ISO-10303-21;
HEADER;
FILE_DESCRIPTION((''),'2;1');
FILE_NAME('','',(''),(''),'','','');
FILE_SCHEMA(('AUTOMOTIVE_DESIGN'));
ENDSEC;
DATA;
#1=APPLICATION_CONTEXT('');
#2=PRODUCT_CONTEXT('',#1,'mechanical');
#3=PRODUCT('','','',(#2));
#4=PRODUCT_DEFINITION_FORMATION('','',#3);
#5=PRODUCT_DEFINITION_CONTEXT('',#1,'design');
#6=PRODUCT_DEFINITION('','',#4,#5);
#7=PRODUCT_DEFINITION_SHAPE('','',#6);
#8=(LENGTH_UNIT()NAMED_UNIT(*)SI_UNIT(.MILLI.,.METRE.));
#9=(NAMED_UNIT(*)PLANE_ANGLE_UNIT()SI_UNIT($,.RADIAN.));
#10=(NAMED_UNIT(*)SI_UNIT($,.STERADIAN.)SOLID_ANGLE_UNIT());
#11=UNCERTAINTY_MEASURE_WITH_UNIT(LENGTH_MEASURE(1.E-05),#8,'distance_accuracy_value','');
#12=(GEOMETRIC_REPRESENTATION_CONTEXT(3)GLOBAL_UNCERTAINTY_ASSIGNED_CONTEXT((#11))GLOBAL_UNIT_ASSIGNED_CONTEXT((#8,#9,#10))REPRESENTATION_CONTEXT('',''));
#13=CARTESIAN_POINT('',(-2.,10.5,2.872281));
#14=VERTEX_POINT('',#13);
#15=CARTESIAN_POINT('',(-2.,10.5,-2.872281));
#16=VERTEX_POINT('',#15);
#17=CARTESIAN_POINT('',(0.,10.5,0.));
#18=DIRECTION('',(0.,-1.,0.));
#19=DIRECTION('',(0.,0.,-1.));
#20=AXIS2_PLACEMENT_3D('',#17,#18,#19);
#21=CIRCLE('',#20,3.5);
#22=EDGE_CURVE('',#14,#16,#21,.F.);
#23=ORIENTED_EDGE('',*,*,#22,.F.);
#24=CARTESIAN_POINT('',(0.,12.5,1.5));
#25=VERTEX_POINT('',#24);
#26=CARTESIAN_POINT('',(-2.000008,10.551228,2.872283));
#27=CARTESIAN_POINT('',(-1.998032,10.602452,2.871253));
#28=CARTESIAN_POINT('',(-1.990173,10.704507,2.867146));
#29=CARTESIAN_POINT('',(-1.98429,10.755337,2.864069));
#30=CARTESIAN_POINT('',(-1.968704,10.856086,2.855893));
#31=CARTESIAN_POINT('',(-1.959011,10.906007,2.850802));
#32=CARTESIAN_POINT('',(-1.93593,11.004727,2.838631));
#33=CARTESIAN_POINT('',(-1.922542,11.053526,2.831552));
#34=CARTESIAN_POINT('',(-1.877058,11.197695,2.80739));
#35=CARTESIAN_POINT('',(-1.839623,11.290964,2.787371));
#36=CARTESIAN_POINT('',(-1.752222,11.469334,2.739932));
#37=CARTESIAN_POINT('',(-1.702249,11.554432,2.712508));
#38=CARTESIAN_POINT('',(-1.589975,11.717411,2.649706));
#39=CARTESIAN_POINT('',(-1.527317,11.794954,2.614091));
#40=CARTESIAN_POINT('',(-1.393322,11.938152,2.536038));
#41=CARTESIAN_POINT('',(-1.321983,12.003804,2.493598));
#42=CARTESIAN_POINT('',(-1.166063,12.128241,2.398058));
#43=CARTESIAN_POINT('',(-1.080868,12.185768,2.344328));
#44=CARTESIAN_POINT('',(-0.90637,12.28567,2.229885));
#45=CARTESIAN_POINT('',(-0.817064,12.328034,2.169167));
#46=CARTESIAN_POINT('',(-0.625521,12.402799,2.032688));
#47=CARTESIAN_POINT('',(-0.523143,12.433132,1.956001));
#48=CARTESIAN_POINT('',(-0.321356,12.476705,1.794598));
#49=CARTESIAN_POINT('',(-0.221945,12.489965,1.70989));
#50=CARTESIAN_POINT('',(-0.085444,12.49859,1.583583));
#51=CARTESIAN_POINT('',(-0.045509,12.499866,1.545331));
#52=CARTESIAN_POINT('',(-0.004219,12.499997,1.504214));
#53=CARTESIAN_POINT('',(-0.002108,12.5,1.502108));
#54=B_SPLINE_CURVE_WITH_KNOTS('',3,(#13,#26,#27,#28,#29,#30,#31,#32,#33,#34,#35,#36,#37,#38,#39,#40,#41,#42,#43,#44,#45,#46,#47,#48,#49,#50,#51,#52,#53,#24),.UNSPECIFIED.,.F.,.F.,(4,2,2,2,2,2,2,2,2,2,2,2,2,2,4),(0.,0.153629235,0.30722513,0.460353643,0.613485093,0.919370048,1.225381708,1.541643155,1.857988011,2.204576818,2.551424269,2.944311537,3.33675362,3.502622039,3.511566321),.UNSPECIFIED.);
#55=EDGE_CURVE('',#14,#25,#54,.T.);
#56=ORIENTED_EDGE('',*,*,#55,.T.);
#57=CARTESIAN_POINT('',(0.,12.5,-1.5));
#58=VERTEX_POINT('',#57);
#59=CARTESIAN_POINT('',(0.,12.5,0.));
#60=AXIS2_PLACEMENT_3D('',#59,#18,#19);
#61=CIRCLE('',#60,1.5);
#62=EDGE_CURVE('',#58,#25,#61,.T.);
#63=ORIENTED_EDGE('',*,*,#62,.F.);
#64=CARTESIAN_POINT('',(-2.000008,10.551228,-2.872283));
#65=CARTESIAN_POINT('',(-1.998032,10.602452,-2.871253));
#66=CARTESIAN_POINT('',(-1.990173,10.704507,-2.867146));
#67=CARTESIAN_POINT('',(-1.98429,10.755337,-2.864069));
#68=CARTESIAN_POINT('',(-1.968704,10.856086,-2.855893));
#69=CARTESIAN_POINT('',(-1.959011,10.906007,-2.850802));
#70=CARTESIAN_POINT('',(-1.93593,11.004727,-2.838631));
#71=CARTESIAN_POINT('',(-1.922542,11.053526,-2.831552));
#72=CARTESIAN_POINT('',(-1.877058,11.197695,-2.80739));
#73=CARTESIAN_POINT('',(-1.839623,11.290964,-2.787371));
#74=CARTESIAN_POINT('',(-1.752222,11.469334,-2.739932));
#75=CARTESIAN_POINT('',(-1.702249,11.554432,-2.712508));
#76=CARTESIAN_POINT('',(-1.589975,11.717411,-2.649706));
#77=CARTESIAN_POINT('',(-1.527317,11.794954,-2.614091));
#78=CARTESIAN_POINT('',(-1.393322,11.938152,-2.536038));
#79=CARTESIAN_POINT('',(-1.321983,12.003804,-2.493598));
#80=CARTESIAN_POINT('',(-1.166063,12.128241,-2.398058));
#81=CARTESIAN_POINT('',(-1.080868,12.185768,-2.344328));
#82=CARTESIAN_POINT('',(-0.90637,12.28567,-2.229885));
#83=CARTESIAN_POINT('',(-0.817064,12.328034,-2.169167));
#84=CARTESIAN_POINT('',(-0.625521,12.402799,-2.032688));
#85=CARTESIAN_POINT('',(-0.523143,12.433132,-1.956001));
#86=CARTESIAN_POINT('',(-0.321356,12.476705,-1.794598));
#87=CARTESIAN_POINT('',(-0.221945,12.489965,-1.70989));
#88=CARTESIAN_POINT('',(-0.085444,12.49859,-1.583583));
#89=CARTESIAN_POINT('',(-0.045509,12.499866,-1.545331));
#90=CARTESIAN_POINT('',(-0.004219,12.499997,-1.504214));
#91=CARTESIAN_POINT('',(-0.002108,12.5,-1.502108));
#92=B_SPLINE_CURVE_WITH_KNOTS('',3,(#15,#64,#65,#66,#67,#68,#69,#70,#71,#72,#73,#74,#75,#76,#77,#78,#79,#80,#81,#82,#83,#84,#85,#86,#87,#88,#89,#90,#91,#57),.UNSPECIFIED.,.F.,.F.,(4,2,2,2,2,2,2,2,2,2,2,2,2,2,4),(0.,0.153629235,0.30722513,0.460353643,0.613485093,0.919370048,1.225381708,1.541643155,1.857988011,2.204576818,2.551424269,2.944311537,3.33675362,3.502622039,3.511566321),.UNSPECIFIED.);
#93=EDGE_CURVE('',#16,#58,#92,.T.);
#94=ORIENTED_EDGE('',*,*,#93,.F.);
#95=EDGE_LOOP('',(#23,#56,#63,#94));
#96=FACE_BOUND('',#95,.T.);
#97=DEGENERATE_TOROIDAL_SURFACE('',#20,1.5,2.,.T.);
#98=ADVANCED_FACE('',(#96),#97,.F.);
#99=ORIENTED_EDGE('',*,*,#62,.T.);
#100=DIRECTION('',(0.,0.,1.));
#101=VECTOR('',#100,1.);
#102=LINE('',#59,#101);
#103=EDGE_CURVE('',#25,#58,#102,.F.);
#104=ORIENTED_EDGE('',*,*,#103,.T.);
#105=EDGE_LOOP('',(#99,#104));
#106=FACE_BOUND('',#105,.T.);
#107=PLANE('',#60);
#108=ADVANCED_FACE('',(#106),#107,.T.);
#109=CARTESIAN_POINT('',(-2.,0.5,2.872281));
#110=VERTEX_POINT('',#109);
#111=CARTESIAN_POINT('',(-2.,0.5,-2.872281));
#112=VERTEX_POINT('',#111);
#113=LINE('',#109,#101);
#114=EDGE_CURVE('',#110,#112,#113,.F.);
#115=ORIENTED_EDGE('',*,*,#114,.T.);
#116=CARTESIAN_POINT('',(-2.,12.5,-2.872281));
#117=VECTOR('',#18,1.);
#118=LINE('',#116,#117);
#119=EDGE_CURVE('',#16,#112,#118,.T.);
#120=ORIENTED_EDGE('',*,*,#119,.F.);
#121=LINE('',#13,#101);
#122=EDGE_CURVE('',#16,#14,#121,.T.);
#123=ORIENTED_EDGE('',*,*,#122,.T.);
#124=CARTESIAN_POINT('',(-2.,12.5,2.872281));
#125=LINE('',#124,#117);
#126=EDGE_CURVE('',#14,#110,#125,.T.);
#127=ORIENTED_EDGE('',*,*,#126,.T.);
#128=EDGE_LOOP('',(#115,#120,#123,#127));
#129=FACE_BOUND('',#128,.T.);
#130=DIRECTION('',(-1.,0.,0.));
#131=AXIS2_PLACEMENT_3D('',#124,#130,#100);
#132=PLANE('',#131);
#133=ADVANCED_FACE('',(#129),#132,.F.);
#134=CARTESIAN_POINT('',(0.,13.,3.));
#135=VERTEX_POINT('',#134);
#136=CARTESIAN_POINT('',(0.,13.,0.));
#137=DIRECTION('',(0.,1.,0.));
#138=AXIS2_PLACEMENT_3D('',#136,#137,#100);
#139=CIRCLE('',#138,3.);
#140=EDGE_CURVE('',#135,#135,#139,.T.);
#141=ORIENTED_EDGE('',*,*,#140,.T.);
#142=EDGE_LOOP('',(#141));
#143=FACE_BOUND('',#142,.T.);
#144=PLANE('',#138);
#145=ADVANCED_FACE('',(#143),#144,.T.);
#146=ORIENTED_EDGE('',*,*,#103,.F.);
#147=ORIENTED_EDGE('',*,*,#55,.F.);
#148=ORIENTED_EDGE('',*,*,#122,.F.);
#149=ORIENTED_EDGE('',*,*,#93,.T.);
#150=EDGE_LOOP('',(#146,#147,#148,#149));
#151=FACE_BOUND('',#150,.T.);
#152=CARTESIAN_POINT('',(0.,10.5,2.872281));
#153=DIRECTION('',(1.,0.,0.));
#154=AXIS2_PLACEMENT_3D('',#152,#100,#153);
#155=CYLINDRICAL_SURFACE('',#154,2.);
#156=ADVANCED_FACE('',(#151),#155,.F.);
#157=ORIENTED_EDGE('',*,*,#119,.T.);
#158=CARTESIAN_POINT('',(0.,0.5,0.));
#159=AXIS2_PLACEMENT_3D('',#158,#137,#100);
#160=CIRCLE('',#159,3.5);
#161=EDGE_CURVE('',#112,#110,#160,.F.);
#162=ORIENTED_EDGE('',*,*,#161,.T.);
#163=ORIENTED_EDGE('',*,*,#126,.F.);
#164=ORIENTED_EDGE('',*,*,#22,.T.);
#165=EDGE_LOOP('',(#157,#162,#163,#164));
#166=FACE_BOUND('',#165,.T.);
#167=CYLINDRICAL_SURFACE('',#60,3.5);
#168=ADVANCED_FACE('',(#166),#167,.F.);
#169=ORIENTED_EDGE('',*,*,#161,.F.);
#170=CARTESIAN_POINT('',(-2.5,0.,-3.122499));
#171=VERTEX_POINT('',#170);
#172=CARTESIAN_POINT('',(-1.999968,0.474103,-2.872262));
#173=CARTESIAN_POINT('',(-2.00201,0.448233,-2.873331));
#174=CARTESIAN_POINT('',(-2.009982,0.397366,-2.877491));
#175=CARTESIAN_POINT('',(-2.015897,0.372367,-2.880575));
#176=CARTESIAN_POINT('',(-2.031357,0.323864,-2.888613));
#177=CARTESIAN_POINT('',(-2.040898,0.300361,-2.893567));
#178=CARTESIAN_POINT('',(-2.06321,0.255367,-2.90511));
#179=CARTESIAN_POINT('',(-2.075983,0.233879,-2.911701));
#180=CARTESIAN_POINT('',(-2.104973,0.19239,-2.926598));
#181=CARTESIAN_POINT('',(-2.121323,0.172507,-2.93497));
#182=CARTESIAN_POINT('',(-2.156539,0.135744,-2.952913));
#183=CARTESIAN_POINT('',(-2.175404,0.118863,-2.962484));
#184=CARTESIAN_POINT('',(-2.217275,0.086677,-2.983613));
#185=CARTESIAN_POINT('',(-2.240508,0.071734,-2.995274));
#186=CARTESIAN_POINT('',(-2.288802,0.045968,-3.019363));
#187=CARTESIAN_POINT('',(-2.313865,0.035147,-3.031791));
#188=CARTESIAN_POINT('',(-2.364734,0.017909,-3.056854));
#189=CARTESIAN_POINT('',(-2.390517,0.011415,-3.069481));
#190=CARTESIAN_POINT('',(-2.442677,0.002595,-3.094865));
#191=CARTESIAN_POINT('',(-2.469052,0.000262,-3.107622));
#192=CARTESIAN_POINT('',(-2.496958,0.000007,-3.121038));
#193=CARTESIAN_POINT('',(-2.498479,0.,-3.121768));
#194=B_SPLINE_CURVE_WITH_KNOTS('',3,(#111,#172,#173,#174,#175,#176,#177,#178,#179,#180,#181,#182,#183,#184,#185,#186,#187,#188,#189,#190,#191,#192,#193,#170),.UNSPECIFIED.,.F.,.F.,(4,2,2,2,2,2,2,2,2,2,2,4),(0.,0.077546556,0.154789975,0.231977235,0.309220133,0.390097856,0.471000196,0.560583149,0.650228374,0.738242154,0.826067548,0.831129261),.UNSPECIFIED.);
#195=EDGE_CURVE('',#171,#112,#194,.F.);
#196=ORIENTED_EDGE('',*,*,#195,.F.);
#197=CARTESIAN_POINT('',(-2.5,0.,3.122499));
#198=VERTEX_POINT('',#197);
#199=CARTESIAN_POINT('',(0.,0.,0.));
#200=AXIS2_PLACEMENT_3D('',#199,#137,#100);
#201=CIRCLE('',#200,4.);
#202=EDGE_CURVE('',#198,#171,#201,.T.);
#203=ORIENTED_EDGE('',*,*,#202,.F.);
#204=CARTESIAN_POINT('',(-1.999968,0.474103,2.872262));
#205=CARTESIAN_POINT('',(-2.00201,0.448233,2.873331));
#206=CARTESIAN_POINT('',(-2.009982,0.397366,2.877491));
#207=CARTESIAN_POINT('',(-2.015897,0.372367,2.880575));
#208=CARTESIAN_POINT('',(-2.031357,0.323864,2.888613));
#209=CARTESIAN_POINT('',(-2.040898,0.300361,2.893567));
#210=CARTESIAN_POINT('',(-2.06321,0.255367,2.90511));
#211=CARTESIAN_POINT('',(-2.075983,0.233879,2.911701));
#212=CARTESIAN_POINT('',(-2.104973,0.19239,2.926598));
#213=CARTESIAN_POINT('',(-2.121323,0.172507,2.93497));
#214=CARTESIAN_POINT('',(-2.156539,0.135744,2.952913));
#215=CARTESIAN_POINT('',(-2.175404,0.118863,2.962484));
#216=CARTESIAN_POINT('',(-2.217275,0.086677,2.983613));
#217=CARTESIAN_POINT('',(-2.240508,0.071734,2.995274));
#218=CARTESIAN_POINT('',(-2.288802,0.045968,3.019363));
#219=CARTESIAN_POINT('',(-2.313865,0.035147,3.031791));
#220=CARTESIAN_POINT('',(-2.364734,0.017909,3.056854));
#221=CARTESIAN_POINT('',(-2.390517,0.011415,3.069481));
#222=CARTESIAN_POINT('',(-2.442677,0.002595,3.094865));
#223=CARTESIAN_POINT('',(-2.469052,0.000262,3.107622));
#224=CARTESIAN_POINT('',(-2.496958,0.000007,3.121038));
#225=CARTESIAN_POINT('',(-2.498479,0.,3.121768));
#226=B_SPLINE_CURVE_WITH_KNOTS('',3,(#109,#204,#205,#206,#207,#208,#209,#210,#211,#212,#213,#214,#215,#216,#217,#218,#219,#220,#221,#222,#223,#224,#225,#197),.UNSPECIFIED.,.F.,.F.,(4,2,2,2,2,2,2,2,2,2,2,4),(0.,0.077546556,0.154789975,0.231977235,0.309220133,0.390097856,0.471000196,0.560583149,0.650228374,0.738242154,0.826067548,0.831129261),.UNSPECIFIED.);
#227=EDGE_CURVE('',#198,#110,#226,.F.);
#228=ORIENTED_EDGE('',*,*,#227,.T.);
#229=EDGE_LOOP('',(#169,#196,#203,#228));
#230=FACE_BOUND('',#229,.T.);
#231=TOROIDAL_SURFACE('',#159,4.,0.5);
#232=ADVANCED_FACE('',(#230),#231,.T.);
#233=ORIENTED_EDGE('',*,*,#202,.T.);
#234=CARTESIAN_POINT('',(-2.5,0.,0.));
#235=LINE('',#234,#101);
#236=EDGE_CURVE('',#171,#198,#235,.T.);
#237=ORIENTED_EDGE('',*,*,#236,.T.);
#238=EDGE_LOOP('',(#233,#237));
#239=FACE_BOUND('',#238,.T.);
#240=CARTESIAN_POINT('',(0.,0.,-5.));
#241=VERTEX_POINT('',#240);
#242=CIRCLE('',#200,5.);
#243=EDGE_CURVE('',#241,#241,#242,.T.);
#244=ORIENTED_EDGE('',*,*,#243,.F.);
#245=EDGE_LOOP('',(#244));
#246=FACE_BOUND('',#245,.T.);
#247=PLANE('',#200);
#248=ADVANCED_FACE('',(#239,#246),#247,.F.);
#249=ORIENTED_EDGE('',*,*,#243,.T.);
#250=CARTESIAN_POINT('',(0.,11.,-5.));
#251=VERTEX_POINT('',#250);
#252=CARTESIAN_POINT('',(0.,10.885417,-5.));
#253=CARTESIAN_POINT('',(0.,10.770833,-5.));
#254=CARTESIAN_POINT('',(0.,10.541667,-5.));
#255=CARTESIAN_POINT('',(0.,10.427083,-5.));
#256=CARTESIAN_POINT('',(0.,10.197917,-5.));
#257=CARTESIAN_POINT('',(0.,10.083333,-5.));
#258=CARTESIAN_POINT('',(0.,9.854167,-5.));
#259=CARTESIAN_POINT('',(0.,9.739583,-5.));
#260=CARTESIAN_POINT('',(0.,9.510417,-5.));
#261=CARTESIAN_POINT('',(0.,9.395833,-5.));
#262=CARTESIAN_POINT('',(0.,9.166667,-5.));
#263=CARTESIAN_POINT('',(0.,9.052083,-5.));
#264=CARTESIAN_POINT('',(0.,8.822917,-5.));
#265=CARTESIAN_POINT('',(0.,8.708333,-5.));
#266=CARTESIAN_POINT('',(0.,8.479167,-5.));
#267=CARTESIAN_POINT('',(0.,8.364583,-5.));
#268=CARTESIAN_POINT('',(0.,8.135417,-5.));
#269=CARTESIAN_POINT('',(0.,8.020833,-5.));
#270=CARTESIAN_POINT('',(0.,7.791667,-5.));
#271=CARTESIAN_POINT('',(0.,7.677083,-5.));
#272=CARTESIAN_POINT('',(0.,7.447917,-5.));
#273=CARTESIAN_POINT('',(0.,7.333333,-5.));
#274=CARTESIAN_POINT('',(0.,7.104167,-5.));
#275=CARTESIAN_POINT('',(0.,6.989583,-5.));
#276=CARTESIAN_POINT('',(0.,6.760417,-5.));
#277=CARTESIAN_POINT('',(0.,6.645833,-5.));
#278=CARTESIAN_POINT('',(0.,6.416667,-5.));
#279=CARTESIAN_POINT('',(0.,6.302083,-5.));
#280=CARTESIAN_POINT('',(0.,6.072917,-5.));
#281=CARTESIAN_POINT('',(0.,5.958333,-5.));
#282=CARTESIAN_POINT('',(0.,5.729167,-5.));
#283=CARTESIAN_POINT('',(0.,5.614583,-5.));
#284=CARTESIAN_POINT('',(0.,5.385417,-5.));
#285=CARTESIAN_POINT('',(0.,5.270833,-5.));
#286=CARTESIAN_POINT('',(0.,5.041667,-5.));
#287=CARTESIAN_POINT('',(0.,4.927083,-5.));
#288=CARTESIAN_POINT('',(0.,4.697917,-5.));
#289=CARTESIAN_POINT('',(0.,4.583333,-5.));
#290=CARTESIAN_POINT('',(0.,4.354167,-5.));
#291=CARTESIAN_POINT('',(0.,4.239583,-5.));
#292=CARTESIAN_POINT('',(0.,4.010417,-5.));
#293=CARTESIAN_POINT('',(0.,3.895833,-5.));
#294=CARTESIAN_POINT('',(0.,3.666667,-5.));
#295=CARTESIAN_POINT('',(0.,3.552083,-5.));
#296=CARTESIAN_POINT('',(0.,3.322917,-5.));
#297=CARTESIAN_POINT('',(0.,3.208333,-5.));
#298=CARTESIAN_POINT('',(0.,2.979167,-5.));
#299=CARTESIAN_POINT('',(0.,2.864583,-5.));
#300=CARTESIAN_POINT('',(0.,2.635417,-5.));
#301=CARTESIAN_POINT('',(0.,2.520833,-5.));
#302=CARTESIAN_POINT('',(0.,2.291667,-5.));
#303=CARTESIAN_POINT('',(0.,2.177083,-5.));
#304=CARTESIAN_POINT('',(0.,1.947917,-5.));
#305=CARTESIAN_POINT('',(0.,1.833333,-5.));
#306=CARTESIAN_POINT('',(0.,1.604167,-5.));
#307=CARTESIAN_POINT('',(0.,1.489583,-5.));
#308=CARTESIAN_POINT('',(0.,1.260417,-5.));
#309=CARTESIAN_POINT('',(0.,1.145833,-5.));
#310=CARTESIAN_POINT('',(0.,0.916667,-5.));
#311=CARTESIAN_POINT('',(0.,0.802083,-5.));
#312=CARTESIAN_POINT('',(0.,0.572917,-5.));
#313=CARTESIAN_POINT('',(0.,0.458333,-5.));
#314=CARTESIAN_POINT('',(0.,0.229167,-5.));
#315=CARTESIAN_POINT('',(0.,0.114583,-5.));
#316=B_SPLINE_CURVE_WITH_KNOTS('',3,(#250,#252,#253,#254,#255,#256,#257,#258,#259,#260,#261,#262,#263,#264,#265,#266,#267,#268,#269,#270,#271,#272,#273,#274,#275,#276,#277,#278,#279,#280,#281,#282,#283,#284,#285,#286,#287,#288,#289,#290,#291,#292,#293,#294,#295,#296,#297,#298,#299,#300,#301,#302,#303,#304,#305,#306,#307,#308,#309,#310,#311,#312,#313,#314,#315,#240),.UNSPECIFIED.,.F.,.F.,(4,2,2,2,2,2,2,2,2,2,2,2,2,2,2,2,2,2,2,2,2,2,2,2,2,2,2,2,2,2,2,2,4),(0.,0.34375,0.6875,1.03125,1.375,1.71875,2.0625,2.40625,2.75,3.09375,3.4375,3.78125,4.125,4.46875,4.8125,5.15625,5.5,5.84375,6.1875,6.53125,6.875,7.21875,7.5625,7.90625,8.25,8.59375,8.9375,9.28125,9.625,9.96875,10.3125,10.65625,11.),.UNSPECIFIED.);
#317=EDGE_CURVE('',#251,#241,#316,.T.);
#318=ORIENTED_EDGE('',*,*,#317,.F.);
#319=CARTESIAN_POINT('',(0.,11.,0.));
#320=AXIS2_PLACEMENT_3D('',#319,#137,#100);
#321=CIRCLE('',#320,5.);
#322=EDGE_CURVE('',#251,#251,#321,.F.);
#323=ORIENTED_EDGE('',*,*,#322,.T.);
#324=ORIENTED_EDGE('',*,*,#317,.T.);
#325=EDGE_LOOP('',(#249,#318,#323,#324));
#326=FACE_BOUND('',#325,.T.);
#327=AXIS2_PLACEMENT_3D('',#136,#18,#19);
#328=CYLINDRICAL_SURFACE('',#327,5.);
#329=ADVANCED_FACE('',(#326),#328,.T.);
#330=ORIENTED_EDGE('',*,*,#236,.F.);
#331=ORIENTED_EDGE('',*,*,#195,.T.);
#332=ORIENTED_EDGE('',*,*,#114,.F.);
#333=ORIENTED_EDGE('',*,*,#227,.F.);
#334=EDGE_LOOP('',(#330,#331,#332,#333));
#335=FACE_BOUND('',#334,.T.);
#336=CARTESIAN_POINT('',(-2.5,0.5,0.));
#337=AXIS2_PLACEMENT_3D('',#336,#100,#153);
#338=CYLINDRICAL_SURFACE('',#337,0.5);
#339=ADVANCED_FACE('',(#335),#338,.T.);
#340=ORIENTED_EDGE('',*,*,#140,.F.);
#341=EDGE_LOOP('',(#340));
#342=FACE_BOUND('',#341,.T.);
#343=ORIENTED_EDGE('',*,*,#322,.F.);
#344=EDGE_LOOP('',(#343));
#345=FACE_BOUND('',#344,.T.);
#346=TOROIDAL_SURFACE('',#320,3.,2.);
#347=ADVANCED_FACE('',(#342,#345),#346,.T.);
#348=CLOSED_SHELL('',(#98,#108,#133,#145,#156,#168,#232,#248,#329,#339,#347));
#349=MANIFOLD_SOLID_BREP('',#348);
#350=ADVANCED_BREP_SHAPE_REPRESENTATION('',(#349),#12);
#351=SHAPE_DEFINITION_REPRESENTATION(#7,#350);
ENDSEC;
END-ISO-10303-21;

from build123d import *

# Parameters (mm, degrees)
SKETCH1_R           = 5.000000000000002
BOSS_EXTRUDE1_DEPTH = 13
CUT_EXTRUDE1_DEPTH  = 12.5
FILLET4_R           = 2
FILLET5_R           = 0.5
FILLET6_R           = 2


with BuildPart() as part:
    # Sketch1 → Boss-Extrude1 (new body)
    with BuildSketch(Plane(origin=(0, 0, 0), x_dir=(1, 0, 0), z_dir=(0, 1, 0))):
        with Locations(Location((0, 0, 0), (0, 0, 90))):
            Circle(SKETCH1_R)
    extrude(amount=BOSS_EXTRUDE1_DEPTH)

    # Insert → Cut-Extrude1 (cut)
    with BuildSketch(Plane.XZ):
        with BuildLine():
            Line((-1.9999999999999991, 2.872281323269015), (-1.9999999999999991, -2.872281323269015))
            ThreePointArc((-1.9999999999999991, -2.872281323269015), (3.5, 0), (-1.9999999999999991, 2.872281323269015))
        make_face()
    extrude(amount=-CUT_EXTRUDE1_DEPTH, mode=Mode.SUBTRACT)

    # Fillet4
    # the kernel refuses this fillet: 2 mm, written as the material it adds along each edge
    with BuildSketch(Plane(origin=(-1.1e-16, 12.5, 0), x_dir=(-0.9999950652018582, 0, -0.0031415874858792743), z_dir=(-0.0031415874858792743, 0, 0.9999950652018582))) as fillet4_piece_1:
        with BuildLine():
            CenterArc((3.5000000000000004 - FILLET4_R, FILLET4_R), FILLET4_R, 270, 90)
            Line((3.5000000000000004 - FILLET4_R, 0), (3.5000000000000004, 0))
            Line((3.5000000000000004, 0), (3.5000000000000004, FILLET4_R))
        make_face()
    revolve(axis=Axis((-1.1e-16, 12.5, 0), (0, -1, 0)), revolution_arc=359.64)
    with BuildSketch(Plane(origin=(-1.9999999999999991, 12.5, 7.872281323269015), x_dir=(0, -1, 0), z_dir=(0, 0, -1))) as fillet4_piece_2_section:
        with BuildLine():
            CenterArc((FILLET4_R, -FILLET4_R), FILLET4_R, 90, 90)
            Line((0, -FILLET4_R), (0, 0))
            Line((0, 0), (FILLET4_R, 0))
        make_face()
    fillet4_piece_2 = extrude(amount=15.74456264653803, mode=Mode.PRIVATE)
    fillet4_piece_2 = fillet4_piece_2 & Plane(origin=(-1.1e-16, 12.065491957530494, 0), x_dir=(-0.5714285714285712, 0, -0.8206518066482901), z_dir=(0, -1, 0)) * Cylinder(3.5, 40, mode=Mode.PRIVATE)
    add(fillet4_piece_2)

    # Fillet5
    fillet5_edges = [part.edges().sort_by_distance(p)[0] for p in [
        (3.5, 0, -4.4e-16),
        (-1.9999999999999991, 0, 0),
    ]]
    fillet(fillet5_edges, radius=FILLET5_R)

    # Fillet6
    fillet6_edges = [part.edges().sort_by_distance(p)[0] for p in [
        (-9.2e-16, 13, 5.000000000000002),
    ]]
    fillet(fillet6_edges, radius=FILLET6_R)


solid = part.part
